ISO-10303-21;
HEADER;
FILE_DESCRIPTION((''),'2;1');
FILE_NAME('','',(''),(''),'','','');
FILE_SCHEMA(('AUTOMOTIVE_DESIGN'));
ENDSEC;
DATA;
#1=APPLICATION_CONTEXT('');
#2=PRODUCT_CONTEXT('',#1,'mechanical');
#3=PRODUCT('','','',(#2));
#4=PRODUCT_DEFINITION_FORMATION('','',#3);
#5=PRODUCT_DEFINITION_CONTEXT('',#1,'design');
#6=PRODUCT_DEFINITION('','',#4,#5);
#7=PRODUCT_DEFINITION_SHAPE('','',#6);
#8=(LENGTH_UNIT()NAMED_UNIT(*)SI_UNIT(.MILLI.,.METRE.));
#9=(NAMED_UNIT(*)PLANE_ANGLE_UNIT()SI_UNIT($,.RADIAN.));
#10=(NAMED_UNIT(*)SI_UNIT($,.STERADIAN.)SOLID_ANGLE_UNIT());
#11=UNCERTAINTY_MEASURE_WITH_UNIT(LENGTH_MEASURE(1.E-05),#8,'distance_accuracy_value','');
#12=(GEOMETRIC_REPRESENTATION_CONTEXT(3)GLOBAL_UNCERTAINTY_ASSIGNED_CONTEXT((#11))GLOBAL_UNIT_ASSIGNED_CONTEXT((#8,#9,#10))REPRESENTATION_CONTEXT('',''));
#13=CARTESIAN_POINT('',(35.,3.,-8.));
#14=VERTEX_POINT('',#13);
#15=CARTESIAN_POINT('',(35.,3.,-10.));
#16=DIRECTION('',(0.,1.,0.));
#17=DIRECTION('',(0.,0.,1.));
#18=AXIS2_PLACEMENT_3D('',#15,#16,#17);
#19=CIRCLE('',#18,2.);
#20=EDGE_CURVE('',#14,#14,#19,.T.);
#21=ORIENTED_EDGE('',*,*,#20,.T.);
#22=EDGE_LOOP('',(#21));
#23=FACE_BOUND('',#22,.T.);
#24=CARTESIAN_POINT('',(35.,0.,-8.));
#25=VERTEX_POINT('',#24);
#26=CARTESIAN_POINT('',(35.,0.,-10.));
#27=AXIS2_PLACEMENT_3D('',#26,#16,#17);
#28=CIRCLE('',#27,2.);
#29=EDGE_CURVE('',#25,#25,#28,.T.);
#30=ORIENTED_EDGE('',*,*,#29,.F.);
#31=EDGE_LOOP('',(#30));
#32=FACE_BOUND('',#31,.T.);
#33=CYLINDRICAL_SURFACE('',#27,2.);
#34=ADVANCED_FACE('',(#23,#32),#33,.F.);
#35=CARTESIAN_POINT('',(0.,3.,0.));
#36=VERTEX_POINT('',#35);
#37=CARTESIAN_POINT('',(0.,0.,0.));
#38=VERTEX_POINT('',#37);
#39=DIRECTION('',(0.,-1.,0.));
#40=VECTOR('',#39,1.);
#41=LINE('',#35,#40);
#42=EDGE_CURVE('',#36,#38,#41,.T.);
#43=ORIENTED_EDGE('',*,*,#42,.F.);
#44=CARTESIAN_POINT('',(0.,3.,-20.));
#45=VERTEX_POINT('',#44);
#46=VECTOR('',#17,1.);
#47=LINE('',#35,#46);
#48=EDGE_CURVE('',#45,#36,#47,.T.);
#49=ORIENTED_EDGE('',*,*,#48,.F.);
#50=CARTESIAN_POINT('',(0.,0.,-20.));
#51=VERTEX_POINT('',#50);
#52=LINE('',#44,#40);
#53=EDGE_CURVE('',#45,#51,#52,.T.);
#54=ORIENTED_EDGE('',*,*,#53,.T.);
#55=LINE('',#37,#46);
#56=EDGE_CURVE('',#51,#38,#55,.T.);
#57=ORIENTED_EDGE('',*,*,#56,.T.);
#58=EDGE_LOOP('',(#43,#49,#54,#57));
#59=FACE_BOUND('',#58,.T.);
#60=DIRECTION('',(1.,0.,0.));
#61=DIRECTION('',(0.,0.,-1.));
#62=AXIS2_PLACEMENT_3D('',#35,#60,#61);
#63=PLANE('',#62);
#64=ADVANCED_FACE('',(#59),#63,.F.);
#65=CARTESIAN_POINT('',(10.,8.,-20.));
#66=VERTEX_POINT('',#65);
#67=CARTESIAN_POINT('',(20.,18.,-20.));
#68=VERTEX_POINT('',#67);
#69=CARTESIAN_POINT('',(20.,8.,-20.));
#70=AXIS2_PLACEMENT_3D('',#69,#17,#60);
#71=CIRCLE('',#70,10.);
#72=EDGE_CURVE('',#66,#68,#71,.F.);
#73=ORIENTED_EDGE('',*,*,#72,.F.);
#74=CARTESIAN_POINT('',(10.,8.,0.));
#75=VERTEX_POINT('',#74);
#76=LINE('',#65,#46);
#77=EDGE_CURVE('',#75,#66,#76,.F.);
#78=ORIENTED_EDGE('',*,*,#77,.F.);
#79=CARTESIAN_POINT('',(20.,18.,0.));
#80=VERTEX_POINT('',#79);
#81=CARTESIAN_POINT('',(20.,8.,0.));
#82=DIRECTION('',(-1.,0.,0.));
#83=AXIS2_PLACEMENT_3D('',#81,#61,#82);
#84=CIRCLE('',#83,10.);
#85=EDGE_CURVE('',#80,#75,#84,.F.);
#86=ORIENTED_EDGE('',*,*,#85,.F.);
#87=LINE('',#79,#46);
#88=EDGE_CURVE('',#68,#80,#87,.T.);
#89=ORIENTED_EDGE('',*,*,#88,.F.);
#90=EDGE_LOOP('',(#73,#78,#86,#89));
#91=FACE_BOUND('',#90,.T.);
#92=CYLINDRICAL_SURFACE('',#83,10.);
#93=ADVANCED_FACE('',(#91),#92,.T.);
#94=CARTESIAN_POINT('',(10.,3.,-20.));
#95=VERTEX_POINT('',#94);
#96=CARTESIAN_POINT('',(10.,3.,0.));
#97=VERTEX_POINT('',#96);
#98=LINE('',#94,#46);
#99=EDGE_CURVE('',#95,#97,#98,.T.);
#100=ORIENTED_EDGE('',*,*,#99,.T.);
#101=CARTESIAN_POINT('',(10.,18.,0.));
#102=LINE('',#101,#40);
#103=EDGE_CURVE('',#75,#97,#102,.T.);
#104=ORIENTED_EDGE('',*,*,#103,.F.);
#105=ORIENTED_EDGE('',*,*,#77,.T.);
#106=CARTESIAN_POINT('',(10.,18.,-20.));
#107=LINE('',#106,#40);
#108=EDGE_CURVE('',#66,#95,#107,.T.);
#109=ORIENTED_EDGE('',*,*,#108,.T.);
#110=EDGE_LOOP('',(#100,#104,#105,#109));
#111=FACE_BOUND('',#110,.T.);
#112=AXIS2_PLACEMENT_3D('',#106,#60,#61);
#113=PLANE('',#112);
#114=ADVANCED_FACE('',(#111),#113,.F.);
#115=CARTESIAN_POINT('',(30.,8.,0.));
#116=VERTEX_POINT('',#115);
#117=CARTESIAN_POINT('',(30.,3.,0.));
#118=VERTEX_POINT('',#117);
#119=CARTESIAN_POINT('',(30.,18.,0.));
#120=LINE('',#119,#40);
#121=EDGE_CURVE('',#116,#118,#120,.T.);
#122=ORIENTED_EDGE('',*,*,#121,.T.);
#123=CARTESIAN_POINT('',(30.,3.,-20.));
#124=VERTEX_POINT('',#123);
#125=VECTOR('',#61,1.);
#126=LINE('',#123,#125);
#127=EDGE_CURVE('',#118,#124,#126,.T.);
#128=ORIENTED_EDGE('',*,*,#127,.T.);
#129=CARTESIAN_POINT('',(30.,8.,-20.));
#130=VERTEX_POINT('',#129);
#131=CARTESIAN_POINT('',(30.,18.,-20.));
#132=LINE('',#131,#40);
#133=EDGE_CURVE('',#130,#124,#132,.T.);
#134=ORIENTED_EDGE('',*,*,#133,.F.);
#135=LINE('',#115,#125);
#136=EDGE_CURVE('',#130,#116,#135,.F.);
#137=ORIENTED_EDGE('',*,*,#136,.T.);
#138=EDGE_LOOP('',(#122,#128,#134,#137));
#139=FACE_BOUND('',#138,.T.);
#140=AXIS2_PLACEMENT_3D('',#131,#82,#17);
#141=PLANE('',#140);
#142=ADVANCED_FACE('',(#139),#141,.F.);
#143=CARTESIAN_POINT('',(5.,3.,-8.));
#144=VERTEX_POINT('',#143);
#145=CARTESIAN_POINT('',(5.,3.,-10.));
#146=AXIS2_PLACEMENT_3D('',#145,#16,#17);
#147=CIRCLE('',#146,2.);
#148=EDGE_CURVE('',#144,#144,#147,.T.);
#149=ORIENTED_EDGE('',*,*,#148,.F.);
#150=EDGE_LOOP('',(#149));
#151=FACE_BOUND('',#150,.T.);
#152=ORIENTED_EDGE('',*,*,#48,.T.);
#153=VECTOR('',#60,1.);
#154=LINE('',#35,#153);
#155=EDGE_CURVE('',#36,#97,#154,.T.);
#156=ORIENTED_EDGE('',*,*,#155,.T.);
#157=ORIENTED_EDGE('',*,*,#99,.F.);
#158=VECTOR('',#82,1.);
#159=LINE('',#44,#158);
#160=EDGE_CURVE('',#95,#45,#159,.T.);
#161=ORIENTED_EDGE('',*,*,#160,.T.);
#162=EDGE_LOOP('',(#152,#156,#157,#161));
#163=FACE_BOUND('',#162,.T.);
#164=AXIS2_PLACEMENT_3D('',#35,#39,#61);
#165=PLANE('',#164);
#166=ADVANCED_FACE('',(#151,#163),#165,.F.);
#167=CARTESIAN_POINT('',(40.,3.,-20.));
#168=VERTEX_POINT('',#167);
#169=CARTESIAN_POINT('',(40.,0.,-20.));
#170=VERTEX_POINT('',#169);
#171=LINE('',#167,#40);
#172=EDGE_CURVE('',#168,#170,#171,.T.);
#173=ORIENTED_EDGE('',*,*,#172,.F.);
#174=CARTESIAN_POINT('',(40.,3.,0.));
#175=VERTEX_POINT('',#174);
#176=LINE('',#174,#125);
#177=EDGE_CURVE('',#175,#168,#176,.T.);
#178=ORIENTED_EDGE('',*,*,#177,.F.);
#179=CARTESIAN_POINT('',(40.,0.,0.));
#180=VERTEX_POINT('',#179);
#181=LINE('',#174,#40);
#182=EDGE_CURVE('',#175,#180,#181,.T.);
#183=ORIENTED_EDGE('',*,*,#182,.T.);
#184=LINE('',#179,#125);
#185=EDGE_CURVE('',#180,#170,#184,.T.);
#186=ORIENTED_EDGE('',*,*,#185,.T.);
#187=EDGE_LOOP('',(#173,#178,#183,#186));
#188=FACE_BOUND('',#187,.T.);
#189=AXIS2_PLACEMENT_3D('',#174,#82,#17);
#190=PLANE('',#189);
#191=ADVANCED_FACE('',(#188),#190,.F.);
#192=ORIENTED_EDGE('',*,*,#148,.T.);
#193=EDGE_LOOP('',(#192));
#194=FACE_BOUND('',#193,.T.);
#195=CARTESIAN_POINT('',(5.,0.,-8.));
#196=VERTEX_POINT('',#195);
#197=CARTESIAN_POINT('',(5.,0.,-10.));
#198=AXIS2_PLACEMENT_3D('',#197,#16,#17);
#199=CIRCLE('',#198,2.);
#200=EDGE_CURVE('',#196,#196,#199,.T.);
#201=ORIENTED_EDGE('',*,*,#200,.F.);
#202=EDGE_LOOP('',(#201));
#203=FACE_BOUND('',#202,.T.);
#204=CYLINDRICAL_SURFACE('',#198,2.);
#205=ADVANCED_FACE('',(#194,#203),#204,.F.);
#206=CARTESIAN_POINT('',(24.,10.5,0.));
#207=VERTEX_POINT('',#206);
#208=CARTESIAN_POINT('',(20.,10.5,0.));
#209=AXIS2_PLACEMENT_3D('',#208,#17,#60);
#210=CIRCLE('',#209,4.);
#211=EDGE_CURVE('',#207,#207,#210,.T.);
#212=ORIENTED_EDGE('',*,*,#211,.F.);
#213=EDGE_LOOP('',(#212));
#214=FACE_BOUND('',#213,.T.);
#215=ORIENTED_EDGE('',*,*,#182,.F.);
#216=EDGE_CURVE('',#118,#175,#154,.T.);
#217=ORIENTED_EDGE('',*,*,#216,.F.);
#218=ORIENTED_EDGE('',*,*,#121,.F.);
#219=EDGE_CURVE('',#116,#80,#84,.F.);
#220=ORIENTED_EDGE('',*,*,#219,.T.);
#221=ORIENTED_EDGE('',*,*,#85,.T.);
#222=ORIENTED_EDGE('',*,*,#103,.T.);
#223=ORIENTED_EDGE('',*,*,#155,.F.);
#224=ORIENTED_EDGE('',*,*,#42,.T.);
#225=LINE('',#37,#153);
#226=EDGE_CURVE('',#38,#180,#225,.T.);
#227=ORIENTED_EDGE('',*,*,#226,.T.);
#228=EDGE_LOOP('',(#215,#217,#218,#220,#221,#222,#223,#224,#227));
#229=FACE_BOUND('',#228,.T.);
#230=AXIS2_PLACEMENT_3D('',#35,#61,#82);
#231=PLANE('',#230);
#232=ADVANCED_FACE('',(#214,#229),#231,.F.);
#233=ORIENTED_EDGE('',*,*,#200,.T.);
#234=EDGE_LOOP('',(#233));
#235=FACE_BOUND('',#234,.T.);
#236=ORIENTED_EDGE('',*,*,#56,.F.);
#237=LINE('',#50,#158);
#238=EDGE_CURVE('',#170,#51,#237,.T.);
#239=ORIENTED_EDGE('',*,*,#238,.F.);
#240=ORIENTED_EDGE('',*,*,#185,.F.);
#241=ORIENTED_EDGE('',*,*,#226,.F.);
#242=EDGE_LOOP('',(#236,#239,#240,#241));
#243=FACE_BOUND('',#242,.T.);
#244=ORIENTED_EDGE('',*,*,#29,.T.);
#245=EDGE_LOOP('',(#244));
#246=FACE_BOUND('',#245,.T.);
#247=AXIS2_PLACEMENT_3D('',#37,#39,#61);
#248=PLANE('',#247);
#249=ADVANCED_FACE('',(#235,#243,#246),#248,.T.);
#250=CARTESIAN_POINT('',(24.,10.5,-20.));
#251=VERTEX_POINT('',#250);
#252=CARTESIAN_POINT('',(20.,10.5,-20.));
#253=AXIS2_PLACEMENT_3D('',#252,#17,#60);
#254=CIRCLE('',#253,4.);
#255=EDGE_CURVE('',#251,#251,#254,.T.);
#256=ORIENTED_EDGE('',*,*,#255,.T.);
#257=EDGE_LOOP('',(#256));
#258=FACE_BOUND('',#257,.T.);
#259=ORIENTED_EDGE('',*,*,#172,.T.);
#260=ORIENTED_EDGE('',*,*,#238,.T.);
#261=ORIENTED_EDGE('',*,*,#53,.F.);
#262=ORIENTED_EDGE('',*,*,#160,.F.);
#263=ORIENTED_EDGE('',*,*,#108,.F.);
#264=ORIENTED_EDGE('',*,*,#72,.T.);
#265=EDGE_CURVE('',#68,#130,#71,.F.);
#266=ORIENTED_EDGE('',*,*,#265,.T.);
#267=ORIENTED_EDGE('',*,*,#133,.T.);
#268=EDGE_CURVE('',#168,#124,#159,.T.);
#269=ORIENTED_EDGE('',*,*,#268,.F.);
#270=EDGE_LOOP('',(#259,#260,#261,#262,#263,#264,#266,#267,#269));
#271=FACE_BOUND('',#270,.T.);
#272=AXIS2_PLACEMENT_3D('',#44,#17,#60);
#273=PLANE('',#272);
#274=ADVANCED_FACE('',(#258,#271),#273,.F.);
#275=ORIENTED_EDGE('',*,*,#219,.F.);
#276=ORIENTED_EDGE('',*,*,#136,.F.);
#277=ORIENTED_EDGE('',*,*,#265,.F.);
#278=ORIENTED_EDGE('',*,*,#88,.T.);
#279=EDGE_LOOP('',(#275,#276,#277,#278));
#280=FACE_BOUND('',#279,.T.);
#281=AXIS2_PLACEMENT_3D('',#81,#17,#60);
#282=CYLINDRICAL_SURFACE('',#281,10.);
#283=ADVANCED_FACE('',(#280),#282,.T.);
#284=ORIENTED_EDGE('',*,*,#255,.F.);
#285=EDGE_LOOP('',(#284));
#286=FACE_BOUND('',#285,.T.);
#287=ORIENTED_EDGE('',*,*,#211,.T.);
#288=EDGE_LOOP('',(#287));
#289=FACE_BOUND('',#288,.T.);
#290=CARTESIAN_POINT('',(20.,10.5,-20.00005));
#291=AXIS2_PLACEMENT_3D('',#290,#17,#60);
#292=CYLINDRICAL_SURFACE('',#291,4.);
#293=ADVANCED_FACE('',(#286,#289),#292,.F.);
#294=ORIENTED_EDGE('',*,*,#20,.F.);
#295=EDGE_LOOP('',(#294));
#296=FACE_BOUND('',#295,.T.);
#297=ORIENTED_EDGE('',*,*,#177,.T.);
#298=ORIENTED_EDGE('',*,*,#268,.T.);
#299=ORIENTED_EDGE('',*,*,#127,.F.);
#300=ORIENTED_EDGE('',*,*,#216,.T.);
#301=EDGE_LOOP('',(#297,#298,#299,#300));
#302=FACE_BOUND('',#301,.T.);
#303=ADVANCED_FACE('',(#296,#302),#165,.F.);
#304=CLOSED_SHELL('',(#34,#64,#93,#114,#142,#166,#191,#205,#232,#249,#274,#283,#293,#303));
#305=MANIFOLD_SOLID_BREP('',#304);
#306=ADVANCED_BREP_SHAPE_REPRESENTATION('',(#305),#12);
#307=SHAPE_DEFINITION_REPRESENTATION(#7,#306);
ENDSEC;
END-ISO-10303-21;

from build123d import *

# Parameters (mm, degrees)
SKETCH1_W           = 40
SKETCH1_H           = 20
BOSS_EXTRUDE1_DEPTH = 3
SKETCH2_W           = 20
SKETCH2_H           = 20
BOSS_EXTRUDE2_DEPTH = 15
SKETCH3_R           = 4
CUT_EXTRUDE1_DEPTH  = 49.207883173
FILLET1_R           = 10
SKETCH4_R           = 2
CUT_EXTRUDE2_DEPTH  = 48.16990566


with BuildPart() as part:
    # Sketch1 → Boss-Extrude1 (new body)
    with BuildSketch(Plane(origin=(0, 0, 0), x_dir=(1, 0, 0), z_dir=(0, 1, 0))):
        with Locations((20, 10)):
            Rectangle(SKETCH1_W, SKETCH1_H)
    extrude(amount=BOSS_EXTRUDE1_DEPTH)

    # Sketch2 → Boss-Extrude2 (add)
    with BuildSketch(Plane(origin=(0, 3, 0), x_dir=(1, 0, 0), z_dir=(0, 1, 0))):
        with Locations((20, 10)):
            Rectangle(SKETCH2_W, SKETCH2_H)
    extrude(amount=BOSS_EXTRUDE2_DEPTH)

    # Sketch3 → Cut-Extrude1 (cut, through all)
    with BuildSketch(Plane.XY):
        with Locations((20, 10.5)):
            Circle(SKETCH3_R)
    extrude(amount=-CUT_EXTRUDE1_DEPTH, mode=Mode.SUBTRACT)

    # Fillet1
    fillet1_edges = [part.edges().sort_by_distance(p)[0] for p in [
        (30, 18, -10),
        (10, 18, -10),
    ]]
    fillet(fillet1_edges, radius=FILLET1_R - 0.0001)  # a hair under: the kernel refuses the full size

    # Sketch4 → Cut-Extrude2 (cut, through all)
    with BuildSketch(Plane(origin=(0, 3, 0), x_dir=(1, 0, 0), z_dir=(0, 1, 0))):
        with Locations(Location((35, 10, 0), (0, 0, 270))):
            Circle(SKETCH4_R)
        with Locations(Location((5, 10, 0), (0, 0, 270))):
            Circle(SKETCH4_R)
    extrude(amount=-CUT_EXTRUDE2_DEPTH, mode=Mode.SUBTRACT)


solid = part.part
